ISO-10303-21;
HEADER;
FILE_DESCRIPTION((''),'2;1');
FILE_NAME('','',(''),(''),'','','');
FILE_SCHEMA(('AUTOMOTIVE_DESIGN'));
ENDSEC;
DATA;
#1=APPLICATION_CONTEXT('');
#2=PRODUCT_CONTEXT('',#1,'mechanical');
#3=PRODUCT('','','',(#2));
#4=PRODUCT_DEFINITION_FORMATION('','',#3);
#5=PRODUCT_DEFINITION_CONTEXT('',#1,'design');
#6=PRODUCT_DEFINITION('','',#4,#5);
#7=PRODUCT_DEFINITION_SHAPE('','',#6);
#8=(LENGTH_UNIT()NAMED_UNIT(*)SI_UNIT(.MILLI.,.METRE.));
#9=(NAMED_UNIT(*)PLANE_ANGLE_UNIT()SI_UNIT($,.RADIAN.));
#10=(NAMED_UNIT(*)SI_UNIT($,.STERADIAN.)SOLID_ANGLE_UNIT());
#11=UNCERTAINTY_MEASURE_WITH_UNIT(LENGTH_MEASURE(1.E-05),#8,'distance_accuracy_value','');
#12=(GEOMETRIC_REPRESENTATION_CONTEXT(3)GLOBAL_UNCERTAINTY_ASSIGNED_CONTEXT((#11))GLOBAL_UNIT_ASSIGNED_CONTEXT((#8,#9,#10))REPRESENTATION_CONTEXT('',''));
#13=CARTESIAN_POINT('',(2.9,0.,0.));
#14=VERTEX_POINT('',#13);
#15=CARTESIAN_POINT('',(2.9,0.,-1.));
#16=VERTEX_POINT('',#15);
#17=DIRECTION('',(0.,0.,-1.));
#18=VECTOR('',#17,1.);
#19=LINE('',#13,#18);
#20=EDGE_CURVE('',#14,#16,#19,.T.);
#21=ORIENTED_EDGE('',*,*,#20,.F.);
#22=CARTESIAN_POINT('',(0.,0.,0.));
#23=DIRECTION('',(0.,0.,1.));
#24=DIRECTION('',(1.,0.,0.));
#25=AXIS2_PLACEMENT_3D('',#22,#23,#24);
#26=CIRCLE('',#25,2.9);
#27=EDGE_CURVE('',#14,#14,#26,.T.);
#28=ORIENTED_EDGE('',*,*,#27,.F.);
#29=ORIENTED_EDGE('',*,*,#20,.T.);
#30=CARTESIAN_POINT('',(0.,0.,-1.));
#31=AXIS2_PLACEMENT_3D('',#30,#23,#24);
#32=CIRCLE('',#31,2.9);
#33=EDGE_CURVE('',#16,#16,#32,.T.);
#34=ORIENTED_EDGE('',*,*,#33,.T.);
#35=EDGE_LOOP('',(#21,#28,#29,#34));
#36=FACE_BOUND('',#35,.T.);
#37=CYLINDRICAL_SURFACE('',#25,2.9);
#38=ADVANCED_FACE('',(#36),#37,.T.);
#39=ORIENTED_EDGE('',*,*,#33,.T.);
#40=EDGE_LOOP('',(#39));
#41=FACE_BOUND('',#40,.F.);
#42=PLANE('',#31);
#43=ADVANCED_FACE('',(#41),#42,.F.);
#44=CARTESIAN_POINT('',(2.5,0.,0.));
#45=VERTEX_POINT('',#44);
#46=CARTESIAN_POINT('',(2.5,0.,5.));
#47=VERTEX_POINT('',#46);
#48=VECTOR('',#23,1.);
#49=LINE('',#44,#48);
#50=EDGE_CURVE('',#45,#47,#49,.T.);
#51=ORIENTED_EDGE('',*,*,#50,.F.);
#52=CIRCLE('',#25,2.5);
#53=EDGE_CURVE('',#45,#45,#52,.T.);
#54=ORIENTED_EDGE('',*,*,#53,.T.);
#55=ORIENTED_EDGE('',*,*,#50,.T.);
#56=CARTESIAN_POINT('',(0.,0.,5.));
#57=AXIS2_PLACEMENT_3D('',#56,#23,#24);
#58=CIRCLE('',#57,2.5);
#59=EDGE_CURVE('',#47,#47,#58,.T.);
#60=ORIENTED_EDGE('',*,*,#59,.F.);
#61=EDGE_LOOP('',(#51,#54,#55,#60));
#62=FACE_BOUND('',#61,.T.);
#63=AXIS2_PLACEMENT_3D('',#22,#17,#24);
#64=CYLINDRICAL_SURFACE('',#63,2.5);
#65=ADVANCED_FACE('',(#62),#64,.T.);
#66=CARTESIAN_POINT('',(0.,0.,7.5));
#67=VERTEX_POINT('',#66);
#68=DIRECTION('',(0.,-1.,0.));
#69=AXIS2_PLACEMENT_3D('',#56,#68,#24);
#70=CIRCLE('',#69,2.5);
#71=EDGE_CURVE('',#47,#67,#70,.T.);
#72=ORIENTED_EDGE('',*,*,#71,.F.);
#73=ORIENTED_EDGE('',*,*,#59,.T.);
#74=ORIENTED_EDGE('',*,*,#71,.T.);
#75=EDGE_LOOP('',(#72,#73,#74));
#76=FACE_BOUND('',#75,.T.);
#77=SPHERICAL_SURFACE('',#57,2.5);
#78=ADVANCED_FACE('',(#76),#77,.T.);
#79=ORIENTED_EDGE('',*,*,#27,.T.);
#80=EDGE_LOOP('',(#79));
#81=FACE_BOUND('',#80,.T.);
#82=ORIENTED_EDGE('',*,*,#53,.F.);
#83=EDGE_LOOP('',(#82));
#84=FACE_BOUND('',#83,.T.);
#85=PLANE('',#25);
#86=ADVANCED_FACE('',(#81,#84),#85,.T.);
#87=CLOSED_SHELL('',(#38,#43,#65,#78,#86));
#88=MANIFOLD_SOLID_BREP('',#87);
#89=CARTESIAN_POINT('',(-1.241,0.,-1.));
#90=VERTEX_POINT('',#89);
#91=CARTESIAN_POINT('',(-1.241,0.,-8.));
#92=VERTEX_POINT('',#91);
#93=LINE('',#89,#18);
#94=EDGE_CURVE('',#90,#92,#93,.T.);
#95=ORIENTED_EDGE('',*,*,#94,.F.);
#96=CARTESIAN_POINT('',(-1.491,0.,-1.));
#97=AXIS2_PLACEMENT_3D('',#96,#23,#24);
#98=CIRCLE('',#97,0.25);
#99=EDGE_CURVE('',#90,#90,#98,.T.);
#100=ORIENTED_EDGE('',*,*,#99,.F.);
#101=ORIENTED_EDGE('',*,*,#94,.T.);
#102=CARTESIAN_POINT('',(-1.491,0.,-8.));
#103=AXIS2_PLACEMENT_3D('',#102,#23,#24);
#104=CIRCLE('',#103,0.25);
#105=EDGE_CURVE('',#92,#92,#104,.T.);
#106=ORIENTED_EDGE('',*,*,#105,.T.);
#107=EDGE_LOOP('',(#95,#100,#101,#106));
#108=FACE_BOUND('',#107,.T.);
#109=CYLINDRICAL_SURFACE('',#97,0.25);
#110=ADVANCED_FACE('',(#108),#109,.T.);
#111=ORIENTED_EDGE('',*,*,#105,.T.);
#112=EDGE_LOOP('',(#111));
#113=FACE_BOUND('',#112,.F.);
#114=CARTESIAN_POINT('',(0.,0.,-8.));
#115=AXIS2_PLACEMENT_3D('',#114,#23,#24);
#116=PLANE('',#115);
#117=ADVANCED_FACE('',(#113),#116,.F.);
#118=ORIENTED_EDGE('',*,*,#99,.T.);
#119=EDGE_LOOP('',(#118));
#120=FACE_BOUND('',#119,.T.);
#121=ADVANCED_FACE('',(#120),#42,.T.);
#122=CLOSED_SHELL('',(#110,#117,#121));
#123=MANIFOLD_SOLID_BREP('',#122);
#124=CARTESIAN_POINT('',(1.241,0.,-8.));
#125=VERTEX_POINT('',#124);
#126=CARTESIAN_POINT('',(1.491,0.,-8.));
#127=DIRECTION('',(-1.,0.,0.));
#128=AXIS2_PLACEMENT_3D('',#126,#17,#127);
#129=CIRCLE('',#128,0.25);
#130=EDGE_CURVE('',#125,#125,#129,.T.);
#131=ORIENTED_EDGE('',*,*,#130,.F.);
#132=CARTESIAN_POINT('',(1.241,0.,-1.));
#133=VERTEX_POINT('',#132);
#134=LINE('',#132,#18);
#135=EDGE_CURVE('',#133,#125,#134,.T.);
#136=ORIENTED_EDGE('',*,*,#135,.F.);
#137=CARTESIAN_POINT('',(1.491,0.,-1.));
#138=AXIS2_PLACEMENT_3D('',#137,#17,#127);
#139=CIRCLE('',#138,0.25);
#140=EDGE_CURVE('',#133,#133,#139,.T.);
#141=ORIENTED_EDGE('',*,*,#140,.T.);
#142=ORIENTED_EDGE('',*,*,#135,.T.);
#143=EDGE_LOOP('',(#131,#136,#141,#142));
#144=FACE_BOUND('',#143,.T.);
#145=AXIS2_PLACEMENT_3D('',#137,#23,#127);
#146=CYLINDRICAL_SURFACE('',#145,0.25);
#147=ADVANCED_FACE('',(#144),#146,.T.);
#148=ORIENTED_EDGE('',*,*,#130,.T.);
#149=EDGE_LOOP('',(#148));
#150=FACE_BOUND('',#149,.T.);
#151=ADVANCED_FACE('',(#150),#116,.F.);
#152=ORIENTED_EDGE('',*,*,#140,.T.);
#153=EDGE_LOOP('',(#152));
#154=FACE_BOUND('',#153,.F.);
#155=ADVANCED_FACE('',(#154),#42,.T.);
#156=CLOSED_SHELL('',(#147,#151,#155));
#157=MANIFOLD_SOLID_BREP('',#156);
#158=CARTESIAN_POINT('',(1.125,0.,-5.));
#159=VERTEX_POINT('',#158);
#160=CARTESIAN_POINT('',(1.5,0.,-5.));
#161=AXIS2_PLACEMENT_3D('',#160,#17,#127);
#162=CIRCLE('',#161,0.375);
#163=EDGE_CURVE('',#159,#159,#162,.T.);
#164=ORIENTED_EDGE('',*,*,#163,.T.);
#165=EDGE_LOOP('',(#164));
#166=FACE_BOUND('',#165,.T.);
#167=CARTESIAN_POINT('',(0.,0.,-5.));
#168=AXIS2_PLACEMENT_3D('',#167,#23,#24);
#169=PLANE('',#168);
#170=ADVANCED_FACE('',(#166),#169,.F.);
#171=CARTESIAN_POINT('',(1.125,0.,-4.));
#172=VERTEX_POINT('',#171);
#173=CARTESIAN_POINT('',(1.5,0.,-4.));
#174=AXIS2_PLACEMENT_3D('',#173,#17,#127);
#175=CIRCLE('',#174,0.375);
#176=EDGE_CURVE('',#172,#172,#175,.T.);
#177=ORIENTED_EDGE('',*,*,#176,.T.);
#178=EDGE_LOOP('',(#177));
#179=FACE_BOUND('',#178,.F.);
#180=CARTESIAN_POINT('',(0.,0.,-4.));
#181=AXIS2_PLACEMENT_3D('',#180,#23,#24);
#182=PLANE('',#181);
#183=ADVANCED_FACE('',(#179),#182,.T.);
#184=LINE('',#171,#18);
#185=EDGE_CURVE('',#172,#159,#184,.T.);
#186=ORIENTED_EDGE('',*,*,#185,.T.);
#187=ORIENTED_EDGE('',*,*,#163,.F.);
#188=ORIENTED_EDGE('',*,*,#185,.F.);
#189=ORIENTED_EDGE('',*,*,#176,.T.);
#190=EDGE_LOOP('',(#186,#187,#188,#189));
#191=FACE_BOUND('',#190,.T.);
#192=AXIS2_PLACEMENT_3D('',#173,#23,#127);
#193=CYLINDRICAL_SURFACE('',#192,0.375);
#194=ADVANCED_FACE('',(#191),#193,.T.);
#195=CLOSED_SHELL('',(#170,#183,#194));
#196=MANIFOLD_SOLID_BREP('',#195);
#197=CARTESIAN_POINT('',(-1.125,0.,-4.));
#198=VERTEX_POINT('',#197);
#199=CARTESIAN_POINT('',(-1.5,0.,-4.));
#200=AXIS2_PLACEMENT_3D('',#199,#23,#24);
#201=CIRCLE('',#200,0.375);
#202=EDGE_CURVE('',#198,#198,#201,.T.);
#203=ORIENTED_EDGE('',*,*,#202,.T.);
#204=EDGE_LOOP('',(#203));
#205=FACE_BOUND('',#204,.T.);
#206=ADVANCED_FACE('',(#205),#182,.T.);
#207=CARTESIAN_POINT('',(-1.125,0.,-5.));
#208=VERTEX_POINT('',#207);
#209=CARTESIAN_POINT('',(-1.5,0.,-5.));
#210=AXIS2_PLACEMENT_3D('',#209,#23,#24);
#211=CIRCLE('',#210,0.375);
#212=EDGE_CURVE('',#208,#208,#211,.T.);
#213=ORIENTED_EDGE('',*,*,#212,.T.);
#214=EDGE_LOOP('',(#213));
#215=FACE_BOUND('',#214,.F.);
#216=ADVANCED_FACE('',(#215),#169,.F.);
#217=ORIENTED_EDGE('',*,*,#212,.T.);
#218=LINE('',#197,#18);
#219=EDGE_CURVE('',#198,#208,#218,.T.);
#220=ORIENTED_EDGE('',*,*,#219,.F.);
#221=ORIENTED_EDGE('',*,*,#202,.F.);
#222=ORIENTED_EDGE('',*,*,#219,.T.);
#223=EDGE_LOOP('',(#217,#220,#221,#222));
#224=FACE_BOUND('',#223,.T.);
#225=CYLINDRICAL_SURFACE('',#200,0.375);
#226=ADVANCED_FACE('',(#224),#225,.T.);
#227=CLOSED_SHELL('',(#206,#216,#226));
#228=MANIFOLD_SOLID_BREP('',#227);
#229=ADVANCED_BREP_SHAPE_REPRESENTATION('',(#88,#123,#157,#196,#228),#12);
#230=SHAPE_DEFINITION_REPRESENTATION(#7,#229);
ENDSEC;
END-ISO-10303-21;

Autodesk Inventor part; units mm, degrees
ref_plane "YZ Plane" through (0, 0, 0) normal (1, 0, 0) x (0, 1, 0)
ref_plane "XZ Plane" through (0, 0, 0) normal (0, 1, 0) x (-1, 0, 0)
ref_plane "XY Plane" through (0, 0, 0) normal (0, 0, 1) x (1, 0, 0)
sketch "Skizze1" plane through (0, 0, 0) normal (0, 0, 1) x (1, 0, 0)
  circle A0 centre (0, 0) radius 2.5
  dimension "d0" = 5
extrude "Extrusion1" add sketch "Skizze1" along normal blind 7.5
fillet "Rundung1" radius 2.5 1 edges at (-2.5, 0, 7.5)
sketch "Skizze2" plane through (0, 0, 0) normal (0, 0, 1) x (1, 0, 0)
  circle A0 centre (0, 0) radius 2.9
  dimension "d4" = 5.8
extrude "Extrusion2" add sketch "Skizze2" against normal blind 1
sketch "Skizze Helper" plane through (0, 0, 0) normal (0, 0, 1) x (1, 0, 0)
  circle A0 centre (0, 0) radius 1.5 construction
  dimension "d12" = 3
sketch "Skizze5" plane through (0, 0, 0) normal (0, 0, 1) x (1, 0, 0)
  circle A0 centre (-1.491, 0) radius 0.25
  point P0 (0, 0)
  dimension "d13" = 0.5
extrude "Extrusion Bein" add sketch "Skizze5" against normal blind 7 separate body
move or copy body "Körper verschieben Bein" bodies to move or copy 2 copy no translate (0, 0, -1)
sketch "Skizze7" plane through (0, 0, 0) normal (0, 0, 1) x (1, 0, 0)
  circle A0 centre (-1.5, 0) radius 0.375
  point P0 (0, 0)
  dimension "d23" = 0.75
extrude "Extrusion Lötpunkt" add sketch "Skizze7" against normal blind 1 separate body
move or copy body "Körper verschieben Lötpunkt" bodies to move or copy 3 copy no translate (0, 0, -4)
sketch "Skizze Helper2" plane through (0, 0, 0) normal (0, 1, 0) x (-1, 0, 0)
  point P0 (0, 0)
mirror "Spiegeln1" about plane through (0, 0, 0) normal (1, 0, 0) bodies 2
mirror "Spiegeln2" about plane through (0, 0, 0) normal (1, 0, 0) bodies 3
properties part number "LED"
